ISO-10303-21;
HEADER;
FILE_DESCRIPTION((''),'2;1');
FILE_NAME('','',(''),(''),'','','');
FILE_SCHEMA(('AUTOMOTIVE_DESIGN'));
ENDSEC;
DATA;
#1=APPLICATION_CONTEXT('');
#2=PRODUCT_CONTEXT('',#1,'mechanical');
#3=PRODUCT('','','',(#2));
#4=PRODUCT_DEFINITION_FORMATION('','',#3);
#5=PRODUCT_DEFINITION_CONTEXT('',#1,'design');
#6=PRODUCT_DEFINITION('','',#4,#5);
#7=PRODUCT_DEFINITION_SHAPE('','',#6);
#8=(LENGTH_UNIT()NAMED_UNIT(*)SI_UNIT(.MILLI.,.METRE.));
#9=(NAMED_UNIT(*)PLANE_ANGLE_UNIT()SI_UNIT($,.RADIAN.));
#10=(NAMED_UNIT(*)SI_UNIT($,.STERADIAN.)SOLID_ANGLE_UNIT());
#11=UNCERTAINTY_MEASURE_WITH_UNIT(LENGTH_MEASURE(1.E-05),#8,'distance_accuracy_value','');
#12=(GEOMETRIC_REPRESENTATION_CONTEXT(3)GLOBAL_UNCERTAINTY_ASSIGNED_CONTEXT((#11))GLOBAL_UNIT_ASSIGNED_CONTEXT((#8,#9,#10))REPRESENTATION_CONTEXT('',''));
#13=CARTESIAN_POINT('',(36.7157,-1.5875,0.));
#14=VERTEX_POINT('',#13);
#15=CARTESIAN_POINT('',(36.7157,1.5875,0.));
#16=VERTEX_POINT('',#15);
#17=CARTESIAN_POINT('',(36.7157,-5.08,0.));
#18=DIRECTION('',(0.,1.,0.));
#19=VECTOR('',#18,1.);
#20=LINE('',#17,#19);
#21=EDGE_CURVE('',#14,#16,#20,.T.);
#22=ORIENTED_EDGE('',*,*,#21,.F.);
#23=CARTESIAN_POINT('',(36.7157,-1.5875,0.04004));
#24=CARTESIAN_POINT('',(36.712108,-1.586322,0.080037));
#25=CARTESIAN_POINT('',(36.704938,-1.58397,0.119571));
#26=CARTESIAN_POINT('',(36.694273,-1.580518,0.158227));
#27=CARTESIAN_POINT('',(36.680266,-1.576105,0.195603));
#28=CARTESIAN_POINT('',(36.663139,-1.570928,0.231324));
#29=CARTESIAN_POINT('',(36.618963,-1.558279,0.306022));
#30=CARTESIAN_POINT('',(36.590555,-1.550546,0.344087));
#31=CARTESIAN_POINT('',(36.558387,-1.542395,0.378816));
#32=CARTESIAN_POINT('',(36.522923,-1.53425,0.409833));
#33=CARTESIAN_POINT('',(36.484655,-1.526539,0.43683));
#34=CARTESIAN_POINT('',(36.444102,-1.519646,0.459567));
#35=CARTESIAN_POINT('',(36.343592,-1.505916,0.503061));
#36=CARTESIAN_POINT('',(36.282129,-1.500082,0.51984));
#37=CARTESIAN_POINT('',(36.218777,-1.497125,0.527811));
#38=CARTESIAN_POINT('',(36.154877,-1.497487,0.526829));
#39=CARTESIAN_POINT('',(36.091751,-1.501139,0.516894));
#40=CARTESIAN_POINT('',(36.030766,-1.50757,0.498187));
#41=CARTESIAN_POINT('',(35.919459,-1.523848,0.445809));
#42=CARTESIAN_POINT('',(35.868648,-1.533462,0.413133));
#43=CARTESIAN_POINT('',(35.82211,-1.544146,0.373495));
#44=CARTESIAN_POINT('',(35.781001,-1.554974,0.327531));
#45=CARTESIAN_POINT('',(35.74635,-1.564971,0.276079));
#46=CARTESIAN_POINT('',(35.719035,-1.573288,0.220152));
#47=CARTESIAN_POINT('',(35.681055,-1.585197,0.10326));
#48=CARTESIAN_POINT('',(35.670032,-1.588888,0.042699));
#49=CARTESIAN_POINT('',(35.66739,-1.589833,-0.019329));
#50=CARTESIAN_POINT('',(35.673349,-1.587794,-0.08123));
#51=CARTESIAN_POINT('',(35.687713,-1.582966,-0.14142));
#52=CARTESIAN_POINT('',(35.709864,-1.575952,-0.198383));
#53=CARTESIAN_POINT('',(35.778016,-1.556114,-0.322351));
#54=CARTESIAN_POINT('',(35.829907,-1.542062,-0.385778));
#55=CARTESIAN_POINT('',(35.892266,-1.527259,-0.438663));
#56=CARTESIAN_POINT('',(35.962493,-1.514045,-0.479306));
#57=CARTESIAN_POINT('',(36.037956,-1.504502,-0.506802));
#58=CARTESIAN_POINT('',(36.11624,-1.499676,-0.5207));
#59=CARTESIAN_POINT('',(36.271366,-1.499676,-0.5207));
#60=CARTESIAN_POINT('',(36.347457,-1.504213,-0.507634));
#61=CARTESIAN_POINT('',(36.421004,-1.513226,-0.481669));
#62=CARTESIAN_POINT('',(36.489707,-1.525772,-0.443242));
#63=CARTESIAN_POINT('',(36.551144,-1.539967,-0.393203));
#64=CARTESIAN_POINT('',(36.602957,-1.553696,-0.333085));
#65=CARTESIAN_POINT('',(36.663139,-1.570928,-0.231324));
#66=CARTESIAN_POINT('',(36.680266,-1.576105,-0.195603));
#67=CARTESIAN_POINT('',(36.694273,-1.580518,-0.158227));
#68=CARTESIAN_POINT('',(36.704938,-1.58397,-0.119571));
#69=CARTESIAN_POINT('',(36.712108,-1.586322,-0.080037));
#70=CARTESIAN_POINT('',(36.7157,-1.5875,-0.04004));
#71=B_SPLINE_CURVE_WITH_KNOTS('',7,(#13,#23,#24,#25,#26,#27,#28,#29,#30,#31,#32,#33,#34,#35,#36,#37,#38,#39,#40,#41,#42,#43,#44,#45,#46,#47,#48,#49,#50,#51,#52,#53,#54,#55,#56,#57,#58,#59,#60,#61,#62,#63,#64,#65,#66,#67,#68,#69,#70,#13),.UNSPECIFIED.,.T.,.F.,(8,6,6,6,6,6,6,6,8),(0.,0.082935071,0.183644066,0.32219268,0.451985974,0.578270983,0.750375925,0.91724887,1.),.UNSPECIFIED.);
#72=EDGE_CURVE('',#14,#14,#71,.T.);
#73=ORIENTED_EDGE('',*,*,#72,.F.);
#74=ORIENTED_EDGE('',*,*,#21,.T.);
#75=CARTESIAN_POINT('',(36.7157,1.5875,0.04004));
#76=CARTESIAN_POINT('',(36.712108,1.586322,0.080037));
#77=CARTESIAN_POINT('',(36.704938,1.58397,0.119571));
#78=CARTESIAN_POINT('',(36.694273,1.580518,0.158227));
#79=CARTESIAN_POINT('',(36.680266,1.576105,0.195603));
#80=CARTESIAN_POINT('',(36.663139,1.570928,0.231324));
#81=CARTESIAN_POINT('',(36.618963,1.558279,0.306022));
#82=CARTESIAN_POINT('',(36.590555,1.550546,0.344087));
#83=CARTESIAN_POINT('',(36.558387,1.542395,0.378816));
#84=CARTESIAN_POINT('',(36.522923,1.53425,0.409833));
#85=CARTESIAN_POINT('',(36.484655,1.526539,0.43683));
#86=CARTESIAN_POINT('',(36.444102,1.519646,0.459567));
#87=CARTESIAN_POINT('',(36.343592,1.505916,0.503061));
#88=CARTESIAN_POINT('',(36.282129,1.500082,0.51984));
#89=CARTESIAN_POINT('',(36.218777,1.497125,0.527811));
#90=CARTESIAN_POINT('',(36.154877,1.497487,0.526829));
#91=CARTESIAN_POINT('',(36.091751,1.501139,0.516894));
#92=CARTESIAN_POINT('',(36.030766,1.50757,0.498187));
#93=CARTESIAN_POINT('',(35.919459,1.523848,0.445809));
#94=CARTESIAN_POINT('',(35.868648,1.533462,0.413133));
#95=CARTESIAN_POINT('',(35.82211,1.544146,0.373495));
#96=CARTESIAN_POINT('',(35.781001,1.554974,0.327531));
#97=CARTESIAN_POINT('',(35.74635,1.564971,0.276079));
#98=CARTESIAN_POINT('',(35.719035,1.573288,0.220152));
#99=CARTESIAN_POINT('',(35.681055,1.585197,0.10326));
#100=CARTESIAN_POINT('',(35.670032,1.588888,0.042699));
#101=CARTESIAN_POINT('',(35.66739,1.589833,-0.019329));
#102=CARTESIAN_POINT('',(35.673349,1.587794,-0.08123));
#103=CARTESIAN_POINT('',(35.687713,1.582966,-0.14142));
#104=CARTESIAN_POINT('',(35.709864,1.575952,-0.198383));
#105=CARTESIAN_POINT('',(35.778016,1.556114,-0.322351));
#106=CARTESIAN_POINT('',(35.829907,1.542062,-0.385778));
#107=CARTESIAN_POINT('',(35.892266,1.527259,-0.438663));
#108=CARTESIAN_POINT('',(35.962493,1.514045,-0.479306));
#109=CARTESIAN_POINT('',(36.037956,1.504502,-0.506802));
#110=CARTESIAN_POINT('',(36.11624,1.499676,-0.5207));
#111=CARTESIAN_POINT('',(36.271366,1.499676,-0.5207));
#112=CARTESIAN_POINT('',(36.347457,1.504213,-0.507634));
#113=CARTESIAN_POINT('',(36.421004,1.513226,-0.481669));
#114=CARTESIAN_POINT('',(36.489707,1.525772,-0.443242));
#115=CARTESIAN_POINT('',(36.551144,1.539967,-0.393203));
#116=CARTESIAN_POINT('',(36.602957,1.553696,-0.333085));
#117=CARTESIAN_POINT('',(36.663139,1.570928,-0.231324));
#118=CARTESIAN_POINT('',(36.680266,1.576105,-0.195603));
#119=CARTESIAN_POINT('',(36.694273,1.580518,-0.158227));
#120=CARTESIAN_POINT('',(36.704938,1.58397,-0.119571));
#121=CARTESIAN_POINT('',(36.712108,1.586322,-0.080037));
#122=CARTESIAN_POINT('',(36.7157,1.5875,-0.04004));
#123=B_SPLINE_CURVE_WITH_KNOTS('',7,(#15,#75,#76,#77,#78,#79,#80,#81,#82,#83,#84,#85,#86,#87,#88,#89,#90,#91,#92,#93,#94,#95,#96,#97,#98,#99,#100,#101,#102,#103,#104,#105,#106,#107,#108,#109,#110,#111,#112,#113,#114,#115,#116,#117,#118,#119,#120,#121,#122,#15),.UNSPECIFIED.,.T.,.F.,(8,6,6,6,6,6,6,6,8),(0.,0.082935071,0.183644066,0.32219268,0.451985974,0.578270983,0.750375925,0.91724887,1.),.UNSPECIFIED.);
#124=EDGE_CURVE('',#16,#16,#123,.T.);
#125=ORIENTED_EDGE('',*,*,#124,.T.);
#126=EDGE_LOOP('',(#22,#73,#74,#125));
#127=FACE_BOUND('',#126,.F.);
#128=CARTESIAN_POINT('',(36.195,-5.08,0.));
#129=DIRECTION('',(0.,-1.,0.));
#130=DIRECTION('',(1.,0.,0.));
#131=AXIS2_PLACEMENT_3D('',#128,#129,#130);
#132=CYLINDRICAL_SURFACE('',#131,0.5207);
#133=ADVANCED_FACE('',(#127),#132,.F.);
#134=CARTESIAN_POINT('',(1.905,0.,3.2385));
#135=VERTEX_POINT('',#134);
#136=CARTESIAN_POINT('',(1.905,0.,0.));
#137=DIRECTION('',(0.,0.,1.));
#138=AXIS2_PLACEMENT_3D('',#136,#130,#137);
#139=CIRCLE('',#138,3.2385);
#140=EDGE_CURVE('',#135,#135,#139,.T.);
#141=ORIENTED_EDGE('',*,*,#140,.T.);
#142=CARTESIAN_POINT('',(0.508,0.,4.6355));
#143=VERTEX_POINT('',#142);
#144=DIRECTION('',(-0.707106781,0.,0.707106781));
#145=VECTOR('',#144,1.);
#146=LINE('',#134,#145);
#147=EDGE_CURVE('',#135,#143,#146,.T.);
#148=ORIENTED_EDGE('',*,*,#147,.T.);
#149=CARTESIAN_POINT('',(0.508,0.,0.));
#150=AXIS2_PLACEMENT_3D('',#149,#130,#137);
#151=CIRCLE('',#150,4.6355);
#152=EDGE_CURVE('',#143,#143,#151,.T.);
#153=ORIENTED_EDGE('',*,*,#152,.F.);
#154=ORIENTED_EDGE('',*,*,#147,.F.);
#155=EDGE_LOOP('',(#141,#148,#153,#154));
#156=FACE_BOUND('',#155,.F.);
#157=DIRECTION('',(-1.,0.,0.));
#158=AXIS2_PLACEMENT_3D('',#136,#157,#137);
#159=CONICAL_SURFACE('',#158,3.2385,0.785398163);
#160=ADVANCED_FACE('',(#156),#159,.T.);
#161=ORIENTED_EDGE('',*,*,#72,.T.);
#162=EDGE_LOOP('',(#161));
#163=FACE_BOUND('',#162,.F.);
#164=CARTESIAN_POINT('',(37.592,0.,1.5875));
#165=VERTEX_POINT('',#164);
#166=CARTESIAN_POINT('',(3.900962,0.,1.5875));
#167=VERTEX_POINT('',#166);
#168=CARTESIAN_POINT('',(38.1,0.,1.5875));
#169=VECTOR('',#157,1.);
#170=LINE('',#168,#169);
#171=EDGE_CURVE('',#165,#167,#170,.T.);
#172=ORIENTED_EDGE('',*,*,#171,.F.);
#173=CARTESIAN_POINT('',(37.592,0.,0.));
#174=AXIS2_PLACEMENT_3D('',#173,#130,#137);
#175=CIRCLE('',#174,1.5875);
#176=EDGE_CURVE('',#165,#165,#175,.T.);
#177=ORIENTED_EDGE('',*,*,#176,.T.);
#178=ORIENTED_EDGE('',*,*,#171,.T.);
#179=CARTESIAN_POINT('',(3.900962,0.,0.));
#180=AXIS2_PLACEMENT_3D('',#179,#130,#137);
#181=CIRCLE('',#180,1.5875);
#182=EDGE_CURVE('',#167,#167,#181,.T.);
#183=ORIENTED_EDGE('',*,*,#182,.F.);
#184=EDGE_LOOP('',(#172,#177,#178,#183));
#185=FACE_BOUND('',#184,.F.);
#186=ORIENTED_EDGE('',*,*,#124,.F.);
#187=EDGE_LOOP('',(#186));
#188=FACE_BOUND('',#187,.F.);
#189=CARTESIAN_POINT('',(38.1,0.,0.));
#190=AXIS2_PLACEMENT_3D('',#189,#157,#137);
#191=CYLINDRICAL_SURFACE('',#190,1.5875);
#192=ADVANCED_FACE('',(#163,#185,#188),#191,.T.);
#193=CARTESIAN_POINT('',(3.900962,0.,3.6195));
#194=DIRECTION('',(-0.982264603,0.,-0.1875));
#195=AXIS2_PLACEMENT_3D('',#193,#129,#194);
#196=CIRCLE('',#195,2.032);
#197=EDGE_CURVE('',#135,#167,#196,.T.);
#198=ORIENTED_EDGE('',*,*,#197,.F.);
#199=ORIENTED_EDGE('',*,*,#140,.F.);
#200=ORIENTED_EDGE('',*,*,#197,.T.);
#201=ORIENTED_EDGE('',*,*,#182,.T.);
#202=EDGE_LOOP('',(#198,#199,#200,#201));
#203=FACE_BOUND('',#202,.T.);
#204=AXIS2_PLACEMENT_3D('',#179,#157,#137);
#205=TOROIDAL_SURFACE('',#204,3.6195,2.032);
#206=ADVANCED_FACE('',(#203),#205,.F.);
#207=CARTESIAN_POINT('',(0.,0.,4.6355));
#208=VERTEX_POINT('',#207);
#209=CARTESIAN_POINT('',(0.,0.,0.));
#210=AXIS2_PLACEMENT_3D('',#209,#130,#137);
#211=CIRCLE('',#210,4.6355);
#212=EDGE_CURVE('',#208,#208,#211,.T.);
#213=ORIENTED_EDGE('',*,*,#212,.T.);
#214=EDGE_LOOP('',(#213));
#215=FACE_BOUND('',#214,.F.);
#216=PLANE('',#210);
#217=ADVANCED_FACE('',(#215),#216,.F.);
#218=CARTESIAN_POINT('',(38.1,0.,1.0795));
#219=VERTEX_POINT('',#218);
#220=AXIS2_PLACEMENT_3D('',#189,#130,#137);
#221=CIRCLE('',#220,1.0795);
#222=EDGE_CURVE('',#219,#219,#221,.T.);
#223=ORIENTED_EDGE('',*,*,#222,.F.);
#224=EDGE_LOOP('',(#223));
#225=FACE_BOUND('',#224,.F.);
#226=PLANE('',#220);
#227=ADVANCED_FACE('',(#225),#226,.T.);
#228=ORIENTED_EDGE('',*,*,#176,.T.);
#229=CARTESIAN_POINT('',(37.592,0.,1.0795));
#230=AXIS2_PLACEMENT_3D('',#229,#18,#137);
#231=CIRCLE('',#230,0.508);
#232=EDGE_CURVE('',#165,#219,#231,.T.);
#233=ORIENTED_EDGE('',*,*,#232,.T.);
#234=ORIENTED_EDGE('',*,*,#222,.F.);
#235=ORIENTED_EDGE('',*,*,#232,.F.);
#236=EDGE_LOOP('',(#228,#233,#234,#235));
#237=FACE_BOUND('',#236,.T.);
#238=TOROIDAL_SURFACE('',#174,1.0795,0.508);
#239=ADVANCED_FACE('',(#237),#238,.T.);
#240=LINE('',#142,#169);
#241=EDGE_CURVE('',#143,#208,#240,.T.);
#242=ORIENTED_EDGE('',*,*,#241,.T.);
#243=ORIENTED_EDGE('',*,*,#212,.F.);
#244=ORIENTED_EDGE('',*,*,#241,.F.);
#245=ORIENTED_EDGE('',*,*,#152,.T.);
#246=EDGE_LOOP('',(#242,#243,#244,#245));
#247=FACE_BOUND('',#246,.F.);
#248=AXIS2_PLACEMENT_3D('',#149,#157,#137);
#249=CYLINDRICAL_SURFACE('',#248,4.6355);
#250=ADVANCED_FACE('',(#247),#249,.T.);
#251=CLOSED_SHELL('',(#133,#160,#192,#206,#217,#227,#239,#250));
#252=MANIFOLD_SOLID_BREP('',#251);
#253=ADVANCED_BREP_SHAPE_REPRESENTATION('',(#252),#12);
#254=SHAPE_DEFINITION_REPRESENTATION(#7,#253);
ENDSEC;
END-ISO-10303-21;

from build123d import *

# Parameters (mm, degrees)
F3_R     = 0.508
F6_R     = 0.5207
F7_DEPTH = 9.7165


# Not quite as in the source:
# - a fillet or chamfer that OpenCascade refuses, or shapes differently, is made with other operations: its cross-section is extruded or revolved along the edge and cut away or added


with BuildPart() as f1:
    # F0 (on Front) → F1 (revolve)
    with BuildSketch(Plane.XZ):
        Polygon((0, 4.6355), (0, 0), (38.1, 0), (38.1, 1.5875), (1.905, 1.5875), (1.905, 3.2385), (0.508, 4.6355), align=None)
    revolve(axis=Axis((19.05, 0, 0), (1, 0, 0)))

    # F2: fillet of radius 2.032 on 1 edges, made by hand

    # F2_s1 → F2_t2 (revolve)
    with BuildSketch(Plane.XZ):
        with BuildLine():
            ThreePointArc((1.905, 3.2385), (2.6058107165, 2.0537388432), (3.900961673, 1.5875))
            Line((3.900961673, 1.5875), (3.900961673, 1.54686))
            Line((3.900961673, 1.54686), (1.905, 1.54686))
            Line((1.905, 1.54686), (1.86436, 1.5875))
            ThreePointArc((1.86436, 1.5875), (1.86436, 2.413), (1.8650807665, 3.23088))
            Line((1.8650807665, 3.23088), (1.905, 3.2385))
        make_face()
    revolve(axis=Axis((1.905, 0, 0), (1, 0, 0)))

    # F3
    f3_edges = [f1.edges().sort_by_distance(p)[0] for p in [
        (38.1, 0, -1.5875),
    ]]
    fillet(f3_edges, radius=F3_R)

    # F6 (on offset) → F7 (cut, through all)
    with BuildSketch(Plane.XZ.offset(5.08)):
        with Locations((36.195, 0)):
            Circle(F6_R)
    extrude(amount=-F7_DEPTH, mode=Mode.SUBTRACT)


solid = f1.part
